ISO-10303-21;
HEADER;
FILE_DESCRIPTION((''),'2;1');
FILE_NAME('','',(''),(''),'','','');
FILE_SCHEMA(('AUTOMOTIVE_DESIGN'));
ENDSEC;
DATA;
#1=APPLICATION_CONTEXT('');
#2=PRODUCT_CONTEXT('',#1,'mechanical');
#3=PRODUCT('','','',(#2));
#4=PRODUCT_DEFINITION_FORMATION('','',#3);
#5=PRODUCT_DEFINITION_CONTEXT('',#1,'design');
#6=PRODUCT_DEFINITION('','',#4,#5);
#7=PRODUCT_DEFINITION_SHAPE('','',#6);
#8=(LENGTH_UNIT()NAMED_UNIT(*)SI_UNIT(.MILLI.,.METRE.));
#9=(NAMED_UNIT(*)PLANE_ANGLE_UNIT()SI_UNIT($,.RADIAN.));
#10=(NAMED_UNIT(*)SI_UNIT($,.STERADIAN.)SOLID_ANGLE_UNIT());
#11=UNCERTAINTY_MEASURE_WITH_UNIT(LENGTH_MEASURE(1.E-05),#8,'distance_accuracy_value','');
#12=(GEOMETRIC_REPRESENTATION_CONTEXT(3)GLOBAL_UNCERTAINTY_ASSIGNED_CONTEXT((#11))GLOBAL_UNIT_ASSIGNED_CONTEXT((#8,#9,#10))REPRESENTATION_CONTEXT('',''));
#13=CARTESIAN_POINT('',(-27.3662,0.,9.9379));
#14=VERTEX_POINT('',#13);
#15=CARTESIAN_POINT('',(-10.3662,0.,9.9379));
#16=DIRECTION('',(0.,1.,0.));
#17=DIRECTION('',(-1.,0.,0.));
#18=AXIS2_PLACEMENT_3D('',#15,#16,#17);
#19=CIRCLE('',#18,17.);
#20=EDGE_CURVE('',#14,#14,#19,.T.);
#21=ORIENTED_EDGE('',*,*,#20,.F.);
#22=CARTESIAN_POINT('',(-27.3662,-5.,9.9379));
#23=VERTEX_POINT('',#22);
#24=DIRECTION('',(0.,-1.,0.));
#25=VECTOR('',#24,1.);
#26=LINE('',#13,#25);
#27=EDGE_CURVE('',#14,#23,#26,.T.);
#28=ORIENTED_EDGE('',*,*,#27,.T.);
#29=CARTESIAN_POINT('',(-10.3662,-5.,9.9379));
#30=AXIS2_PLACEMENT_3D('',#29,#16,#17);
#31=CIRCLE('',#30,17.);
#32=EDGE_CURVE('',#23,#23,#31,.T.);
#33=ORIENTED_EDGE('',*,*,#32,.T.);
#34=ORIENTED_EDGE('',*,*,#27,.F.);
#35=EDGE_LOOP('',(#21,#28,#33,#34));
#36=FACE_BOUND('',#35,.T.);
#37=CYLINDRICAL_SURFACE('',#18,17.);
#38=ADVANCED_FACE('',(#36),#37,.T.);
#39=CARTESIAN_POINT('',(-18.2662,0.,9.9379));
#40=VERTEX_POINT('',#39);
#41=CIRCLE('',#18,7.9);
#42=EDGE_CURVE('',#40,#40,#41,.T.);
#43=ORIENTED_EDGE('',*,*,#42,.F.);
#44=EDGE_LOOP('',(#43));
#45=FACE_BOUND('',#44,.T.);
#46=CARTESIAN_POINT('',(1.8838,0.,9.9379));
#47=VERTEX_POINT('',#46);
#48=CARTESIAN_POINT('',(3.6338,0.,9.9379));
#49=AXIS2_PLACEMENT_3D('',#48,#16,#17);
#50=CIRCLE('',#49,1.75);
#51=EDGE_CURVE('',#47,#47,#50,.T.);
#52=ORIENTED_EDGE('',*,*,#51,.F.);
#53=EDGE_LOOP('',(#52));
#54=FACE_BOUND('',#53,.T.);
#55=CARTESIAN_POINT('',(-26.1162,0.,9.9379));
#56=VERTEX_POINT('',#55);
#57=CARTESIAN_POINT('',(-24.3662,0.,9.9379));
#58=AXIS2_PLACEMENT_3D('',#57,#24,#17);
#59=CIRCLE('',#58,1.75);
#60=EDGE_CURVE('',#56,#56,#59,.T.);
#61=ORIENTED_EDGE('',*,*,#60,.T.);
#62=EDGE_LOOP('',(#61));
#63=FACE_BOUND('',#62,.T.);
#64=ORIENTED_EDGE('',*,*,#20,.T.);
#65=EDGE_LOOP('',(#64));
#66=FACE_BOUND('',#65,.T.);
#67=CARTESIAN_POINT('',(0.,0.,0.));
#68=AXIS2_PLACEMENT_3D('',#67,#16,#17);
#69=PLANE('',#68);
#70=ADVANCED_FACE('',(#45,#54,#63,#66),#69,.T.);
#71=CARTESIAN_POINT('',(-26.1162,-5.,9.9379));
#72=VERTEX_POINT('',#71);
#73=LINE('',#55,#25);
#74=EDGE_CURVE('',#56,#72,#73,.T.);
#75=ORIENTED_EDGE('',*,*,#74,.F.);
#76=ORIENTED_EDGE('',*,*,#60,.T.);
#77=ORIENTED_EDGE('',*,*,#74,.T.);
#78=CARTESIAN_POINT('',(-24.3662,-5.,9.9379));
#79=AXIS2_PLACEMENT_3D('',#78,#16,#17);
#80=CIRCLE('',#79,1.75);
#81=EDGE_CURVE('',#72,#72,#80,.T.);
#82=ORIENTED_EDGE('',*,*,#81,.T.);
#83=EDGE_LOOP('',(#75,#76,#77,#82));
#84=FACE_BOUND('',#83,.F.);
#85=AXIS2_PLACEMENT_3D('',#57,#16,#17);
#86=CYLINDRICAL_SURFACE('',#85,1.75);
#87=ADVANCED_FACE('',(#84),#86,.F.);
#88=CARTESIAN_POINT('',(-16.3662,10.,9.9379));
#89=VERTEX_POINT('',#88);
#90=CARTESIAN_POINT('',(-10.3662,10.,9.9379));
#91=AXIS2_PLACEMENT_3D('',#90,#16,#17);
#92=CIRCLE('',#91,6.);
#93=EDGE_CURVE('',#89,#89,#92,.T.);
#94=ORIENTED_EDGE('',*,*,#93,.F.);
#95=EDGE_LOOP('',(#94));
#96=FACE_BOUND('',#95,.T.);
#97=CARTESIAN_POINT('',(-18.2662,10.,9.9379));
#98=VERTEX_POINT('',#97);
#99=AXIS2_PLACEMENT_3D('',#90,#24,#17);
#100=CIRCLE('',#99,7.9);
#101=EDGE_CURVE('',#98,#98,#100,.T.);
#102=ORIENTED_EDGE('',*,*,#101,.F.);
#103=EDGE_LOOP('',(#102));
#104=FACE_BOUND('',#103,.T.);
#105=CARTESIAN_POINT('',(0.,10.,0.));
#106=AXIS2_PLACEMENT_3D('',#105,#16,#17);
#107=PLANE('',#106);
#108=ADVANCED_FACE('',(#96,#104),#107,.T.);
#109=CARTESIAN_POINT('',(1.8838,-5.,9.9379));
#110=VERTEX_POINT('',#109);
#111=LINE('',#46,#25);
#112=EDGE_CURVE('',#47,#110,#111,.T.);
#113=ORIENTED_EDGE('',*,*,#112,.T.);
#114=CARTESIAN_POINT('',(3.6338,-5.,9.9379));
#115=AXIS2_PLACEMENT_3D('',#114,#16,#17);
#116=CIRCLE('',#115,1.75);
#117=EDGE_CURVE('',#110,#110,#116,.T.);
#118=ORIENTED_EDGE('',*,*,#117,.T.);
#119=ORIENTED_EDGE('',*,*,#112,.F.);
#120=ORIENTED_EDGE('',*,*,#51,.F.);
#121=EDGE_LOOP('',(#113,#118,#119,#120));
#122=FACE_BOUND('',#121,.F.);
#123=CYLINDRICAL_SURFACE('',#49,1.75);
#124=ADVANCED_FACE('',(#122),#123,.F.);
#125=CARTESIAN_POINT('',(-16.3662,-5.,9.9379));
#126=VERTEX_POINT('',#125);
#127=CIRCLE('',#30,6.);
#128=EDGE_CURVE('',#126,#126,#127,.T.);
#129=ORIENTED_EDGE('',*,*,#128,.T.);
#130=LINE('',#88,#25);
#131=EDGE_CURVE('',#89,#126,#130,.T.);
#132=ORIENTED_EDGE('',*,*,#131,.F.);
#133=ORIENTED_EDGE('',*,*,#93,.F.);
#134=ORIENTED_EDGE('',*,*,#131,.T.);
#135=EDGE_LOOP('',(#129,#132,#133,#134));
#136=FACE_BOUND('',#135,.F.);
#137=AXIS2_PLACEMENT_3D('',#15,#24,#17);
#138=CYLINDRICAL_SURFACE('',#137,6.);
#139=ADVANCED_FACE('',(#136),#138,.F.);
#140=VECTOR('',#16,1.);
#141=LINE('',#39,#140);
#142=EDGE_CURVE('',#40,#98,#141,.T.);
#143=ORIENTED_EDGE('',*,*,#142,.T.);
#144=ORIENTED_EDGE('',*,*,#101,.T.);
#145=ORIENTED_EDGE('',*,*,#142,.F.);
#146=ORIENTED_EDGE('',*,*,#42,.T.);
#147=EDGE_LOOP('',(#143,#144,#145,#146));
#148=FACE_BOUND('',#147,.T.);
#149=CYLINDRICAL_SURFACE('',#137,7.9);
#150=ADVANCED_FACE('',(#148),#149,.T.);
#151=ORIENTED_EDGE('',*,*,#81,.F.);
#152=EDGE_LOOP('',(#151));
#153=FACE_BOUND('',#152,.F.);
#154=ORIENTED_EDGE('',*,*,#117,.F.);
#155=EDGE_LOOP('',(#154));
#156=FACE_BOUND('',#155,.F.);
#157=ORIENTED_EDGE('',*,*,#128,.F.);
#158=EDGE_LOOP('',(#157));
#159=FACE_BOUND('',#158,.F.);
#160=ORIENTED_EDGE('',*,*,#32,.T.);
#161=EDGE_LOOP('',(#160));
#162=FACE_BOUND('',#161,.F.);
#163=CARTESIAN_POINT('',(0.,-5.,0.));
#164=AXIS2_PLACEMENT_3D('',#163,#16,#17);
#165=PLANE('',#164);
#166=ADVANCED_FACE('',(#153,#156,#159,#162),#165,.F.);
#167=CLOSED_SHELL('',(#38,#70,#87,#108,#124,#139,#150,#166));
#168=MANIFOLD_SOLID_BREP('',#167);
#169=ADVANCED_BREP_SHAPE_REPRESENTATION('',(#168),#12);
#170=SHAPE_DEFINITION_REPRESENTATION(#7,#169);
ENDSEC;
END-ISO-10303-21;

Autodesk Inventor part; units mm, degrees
ref_plane "YZ Plane" through (0, 0, 0) normal (1, 0, 0) x (0, 1, 0)
ref_plane "XZ Plane" through (0, 0, 0) normal (0, 1, 0) x (-1, 0, 0)
ref_plane "XY Plane" through (0, 0, 0) normal (0, 0, 1) x (1, 0, 0)
sketch "Boceto1" plane through (0, 0, 0) normal (0, 1, 0) x (-1, 0, 0)
  circle A0 centre (10.3662, 9.9379) radius 6
  circle A1 centre (10.3662, 9.9379) radius 7.9
  circle A2 centre (10.3662, 9.9379) radius 17
  line L0 (18.2662, 9.9379) -> (22.6162, 9.9379)
  line L1 (2.4662, 9.9379) -> (-1.8838, 9.9379)
  line L2 (22.6162, 9.9379) -> (24.3662, 9.9379)
  line L3 (-1.8838, 9.9379) -> (-3.6338, 9.9379)
  circle A3 centre (24.3662, 9.9379) radius 1.75
  circle A4 centre (-3.6338, 9.9379) radius 1.75
  dimension "d0" = 12
  dimension "d1" = 15.8
  dimension "d35" = 34
  dimension "d40" = 14
  dimension "d41" = 14
extrude "Extrusión6" add sketch "Boceto1" along normal blind 10 contours A1
extrude "Extrusión8" add sketch "Boceto1" against normal blind 5 contours A1 | A2
thread "Thread3" size "M12x1.5" class "6H" standard "ISO Metric profile" length 40
properties part number "Tuerca de mesa" material "Brass, Soft Yellow"
